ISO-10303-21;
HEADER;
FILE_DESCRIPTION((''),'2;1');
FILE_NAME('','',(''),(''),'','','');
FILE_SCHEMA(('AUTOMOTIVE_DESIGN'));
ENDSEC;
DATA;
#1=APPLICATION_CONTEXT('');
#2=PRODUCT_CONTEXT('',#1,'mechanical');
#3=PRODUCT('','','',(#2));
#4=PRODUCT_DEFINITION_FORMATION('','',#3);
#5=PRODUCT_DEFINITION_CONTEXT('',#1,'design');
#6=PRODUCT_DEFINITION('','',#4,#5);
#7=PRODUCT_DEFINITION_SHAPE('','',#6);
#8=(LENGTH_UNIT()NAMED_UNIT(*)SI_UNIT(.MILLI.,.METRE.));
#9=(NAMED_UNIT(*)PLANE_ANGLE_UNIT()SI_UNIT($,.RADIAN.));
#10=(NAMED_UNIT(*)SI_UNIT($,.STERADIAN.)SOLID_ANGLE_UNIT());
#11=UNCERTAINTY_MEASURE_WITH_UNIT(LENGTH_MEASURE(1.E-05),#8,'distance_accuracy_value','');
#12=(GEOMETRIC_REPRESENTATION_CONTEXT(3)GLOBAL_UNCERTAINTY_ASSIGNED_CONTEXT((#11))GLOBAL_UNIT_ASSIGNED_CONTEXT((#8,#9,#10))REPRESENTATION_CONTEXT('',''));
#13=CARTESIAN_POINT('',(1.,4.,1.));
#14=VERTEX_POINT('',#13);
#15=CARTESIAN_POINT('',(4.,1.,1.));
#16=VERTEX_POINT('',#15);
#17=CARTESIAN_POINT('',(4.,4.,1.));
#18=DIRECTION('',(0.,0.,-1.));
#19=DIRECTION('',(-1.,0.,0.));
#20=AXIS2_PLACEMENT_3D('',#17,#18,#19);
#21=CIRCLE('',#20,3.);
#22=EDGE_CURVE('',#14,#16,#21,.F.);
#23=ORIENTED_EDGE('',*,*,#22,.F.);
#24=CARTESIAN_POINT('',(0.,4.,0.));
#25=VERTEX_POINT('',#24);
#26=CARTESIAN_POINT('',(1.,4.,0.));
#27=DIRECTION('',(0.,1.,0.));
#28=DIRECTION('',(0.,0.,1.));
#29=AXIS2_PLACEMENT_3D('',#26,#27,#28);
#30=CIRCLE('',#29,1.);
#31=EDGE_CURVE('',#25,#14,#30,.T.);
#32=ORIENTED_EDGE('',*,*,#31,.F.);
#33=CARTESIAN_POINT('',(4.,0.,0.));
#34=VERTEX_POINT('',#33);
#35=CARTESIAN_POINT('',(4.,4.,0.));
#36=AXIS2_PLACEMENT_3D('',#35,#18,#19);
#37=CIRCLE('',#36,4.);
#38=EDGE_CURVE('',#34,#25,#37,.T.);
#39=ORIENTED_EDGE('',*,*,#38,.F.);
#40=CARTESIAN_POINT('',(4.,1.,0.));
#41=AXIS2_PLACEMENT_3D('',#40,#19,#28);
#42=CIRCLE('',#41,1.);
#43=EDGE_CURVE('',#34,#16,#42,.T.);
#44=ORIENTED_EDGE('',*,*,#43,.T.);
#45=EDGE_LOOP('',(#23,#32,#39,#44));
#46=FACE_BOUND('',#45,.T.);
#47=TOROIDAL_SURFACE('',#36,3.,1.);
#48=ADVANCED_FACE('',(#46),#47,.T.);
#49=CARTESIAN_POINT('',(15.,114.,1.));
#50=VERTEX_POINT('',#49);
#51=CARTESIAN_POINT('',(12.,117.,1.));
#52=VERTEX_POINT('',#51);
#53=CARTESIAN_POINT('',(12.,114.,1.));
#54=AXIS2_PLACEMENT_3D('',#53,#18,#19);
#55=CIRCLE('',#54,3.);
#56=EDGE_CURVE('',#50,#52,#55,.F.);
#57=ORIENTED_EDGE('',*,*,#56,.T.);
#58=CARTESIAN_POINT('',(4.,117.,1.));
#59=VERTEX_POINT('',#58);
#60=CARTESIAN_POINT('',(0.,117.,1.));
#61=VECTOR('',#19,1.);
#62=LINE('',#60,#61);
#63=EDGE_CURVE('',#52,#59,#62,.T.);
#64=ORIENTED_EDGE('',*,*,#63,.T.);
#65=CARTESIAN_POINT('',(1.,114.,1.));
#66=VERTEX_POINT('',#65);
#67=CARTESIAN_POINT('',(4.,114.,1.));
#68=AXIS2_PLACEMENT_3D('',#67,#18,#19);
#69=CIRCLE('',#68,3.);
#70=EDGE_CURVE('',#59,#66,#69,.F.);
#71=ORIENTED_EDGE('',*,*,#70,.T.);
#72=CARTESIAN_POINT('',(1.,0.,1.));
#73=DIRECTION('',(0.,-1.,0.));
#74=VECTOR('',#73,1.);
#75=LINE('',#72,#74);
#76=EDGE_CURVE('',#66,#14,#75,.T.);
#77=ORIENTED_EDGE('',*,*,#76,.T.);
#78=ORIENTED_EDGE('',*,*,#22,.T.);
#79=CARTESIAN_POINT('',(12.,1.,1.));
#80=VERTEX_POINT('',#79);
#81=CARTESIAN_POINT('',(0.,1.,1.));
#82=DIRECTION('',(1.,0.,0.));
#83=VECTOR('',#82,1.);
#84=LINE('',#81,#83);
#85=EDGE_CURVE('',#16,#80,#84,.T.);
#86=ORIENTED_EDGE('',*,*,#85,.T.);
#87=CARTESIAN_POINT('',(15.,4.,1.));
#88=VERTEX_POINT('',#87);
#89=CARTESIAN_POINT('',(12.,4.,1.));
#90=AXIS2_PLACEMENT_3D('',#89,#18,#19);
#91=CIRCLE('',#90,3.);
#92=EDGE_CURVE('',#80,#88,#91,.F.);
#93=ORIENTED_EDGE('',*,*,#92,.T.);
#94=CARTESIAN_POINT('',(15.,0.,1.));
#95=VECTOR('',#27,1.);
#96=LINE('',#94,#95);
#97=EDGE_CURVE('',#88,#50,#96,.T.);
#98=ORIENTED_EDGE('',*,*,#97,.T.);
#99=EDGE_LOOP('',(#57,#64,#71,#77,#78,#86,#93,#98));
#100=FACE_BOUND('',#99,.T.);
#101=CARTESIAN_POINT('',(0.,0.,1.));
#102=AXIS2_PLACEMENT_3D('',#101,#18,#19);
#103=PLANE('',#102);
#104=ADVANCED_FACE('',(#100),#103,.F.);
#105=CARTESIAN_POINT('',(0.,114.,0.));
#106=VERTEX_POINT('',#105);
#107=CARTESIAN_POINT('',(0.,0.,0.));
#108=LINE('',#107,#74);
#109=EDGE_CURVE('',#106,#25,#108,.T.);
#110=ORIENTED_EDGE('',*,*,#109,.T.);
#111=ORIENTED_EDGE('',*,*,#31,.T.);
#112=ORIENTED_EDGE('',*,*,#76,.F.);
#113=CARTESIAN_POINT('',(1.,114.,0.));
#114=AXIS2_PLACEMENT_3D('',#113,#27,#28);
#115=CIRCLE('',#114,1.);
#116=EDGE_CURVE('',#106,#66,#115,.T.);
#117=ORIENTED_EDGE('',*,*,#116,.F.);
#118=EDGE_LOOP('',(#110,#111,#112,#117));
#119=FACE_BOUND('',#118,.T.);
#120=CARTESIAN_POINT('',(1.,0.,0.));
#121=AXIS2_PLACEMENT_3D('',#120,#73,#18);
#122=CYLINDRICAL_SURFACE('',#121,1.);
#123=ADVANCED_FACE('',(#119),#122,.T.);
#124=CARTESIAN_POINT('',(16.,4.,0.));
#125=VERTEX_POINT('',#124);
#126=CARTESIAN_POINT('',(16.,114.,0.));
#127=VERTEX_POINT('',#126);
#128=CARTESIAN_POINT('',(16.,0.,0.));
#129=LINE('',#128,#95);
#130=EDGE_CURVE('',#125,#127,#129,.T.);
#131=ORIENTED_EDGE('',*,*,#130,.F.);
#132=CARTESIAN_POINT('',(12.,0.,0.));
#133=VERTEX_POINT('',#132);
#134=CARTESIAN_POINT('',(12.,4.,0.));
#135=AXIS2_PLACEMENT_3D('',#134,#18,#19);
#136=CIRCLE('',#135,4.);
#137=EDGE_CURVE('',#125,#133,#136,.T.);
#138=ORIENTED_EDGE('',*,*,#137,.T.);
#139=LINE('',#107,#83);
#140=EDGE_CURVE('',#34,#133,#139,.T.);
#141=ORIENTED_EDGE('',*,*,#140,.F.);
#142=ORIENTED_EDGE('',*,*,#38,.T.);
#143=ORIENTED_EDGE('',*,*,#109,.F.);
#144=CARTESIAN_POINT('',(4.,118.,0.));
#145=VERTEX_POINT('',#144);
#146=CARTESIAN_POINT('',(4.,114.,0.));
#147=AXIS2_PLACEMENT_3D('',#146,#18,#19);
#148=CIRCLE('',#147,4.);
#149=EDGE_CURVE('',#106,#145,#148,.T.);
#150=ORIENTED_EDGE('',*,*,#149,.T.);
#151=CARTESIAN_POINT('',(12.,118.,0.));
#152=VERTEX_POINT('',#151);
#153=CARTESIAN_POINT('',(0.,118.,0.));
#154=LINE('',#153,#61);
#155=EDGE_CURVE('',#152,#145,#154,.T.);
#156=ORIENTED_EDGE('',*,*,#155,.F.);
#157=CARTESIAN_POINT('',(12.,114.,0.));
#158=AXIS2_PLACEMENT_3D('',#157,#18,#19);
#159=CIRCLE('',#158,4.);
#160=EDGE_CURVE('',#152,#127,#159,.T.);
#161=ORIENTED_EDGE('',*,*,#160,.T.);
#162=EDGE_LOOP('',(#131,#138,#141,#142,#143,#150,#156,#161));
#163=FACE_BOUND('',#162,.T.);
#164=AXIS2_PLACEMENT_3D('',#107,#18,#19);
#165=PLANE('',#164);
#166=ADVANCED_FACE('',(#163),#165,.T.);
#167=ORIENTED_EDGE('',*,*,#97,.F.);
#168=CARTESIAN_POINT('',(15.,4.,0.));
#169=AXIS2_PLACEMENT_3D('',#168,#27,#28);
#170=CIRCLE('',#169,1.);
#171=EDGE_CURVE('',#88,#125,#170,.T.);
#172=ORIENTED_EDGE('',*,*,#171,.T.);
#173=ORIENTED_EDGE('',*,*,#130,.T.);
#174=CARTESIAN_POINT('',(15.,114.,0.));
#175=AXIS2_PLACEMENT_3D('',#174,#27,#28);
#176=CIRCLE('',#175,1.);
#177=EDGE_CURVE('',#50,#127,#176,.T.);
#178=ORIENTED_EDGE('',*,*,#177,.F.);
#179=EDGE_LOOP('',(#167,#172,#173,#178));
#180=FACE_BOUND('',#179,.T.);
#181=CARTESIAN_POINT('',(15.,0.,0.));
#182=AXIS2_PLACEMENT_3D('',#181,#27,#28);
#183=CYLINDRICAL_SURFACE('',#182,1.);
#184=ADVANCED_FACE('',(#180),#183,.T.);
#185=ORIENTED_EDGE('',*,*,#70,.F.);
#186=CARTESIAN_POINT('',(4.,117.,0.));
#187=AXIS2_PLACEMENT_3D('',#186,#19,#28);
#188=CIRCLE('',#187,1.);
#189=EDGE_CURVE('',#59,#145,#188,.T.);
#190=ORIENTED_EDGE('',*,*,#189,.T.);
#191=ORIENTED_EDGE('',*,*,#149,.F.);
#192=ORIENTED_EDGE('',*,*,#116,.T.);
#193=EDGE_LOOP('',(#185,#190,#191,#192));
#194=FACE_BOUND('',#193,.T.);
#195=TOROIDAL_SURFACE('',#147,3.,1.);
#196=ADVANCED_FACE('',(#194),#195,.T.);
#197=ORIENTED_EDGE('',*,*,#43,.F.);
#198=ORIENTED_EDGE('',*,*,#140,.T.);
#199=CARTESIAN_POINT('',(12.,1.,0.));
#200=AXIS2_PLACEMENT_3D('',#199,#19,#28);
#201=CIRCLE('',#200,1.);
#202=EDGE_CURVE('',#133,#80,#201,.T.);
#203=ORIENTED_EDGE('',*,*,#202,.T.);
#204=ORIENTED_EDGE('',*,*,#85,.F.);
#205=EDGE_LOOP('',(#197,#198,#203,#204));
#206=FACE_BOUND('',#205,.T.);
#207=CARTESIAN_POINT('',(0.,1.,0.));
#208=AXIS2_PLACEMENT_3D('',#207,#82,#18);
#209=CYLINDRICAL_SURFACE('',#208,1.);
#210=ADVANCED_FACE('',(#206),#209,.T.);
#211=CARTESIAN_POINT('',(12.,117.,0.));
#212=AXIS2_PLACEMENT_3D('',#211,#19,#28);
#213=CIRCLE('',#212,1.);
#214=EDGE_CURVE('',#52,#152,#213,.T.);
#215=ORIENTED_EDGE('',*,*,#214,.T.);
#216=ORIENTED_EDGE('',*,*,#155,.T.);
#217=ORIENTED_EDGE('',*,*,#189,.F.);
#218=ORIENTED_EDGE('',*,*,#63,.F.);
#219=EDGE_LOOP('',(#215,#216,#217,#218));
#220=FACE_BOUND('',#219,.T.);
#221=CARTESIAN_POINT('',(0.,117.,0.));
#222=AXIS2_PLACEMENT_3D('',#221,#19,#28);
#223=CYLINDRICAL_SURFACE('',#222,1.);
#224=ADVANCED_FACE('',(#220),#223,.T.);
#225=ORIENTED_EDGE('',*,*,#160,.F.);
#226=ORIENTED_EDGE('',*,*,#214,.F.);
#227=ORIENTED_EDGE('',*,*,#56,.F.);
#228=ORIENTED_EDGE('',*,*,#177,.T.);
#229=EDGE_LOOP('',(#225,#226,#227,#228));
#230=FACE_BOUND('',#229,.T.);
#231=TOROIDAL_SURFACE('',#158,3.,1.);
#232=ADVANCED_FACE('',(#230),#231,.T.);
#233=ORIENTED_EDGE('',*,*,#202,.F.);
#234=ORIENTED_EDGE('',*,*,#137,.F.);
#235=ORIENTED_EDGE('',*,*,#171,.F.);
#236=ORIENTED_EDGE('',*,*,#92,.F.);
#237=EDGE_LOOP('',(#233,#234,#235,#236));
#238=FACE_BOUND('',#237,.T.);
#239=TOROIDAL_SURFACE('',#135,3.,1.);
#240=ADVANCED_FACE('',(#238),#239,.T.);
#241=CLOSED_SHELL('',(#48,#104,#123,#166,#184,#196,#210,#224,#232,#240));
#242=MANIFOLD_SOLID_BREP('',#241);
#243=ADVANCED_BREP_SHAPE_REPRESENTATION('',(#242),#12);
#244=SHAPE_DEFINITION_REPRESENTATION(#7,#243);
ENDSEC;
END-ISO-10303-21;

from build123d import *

# Parameters (mm, degrees)
SKETCH_1_W      = 16
SKETCH_1_H      = 118
EXTRUDE_1_DEPTH = 1
FILLET_1_R      = 4
FILLET_2_R      = 1


with BuildPart() as part:
    # Эскиз1 → Бобышка-Вытянуть1 (new body)
    with BuildSketch(Plane.XY):
        with Locations((8, 59)):
            Rectangle(SKETCH_1_W, SKETCH_1_H)
    extrude(amount=EXTRUDE_1_DEPTH)

    # Скругление1
    fillet_1_edges = [part.edges().sort_by_distance(p)[0] for p in [
        (0, 118, 0.5),
        (16, 118, 0.5),
        (16, 0, 0.5),
        (0, 0, 0.5),
    ]]
    fillet(fillet_1_edges, radius=FILLET_1_R)

    # Скругление2
    fillet_2_edges = [part.edges().sort_by_distance(p)[0] for p in [
        (1.171572875, 116.828427125, 1),
        (8, 118, 1),
        (14.828427125, 116.828427125, 1),
        (16, 59, 1),
        (14.828427125, 1.171572875, 1),
        (8, 0, 1),
        (1.171572875, 1.171572875, 1),
        (0, 59, 1),
    ]]
    fillet(fillet_2_edges, radius=FILLET_2_R - 0.0001)  # a hair under: the kernel refuses the full size


solid = part.part
